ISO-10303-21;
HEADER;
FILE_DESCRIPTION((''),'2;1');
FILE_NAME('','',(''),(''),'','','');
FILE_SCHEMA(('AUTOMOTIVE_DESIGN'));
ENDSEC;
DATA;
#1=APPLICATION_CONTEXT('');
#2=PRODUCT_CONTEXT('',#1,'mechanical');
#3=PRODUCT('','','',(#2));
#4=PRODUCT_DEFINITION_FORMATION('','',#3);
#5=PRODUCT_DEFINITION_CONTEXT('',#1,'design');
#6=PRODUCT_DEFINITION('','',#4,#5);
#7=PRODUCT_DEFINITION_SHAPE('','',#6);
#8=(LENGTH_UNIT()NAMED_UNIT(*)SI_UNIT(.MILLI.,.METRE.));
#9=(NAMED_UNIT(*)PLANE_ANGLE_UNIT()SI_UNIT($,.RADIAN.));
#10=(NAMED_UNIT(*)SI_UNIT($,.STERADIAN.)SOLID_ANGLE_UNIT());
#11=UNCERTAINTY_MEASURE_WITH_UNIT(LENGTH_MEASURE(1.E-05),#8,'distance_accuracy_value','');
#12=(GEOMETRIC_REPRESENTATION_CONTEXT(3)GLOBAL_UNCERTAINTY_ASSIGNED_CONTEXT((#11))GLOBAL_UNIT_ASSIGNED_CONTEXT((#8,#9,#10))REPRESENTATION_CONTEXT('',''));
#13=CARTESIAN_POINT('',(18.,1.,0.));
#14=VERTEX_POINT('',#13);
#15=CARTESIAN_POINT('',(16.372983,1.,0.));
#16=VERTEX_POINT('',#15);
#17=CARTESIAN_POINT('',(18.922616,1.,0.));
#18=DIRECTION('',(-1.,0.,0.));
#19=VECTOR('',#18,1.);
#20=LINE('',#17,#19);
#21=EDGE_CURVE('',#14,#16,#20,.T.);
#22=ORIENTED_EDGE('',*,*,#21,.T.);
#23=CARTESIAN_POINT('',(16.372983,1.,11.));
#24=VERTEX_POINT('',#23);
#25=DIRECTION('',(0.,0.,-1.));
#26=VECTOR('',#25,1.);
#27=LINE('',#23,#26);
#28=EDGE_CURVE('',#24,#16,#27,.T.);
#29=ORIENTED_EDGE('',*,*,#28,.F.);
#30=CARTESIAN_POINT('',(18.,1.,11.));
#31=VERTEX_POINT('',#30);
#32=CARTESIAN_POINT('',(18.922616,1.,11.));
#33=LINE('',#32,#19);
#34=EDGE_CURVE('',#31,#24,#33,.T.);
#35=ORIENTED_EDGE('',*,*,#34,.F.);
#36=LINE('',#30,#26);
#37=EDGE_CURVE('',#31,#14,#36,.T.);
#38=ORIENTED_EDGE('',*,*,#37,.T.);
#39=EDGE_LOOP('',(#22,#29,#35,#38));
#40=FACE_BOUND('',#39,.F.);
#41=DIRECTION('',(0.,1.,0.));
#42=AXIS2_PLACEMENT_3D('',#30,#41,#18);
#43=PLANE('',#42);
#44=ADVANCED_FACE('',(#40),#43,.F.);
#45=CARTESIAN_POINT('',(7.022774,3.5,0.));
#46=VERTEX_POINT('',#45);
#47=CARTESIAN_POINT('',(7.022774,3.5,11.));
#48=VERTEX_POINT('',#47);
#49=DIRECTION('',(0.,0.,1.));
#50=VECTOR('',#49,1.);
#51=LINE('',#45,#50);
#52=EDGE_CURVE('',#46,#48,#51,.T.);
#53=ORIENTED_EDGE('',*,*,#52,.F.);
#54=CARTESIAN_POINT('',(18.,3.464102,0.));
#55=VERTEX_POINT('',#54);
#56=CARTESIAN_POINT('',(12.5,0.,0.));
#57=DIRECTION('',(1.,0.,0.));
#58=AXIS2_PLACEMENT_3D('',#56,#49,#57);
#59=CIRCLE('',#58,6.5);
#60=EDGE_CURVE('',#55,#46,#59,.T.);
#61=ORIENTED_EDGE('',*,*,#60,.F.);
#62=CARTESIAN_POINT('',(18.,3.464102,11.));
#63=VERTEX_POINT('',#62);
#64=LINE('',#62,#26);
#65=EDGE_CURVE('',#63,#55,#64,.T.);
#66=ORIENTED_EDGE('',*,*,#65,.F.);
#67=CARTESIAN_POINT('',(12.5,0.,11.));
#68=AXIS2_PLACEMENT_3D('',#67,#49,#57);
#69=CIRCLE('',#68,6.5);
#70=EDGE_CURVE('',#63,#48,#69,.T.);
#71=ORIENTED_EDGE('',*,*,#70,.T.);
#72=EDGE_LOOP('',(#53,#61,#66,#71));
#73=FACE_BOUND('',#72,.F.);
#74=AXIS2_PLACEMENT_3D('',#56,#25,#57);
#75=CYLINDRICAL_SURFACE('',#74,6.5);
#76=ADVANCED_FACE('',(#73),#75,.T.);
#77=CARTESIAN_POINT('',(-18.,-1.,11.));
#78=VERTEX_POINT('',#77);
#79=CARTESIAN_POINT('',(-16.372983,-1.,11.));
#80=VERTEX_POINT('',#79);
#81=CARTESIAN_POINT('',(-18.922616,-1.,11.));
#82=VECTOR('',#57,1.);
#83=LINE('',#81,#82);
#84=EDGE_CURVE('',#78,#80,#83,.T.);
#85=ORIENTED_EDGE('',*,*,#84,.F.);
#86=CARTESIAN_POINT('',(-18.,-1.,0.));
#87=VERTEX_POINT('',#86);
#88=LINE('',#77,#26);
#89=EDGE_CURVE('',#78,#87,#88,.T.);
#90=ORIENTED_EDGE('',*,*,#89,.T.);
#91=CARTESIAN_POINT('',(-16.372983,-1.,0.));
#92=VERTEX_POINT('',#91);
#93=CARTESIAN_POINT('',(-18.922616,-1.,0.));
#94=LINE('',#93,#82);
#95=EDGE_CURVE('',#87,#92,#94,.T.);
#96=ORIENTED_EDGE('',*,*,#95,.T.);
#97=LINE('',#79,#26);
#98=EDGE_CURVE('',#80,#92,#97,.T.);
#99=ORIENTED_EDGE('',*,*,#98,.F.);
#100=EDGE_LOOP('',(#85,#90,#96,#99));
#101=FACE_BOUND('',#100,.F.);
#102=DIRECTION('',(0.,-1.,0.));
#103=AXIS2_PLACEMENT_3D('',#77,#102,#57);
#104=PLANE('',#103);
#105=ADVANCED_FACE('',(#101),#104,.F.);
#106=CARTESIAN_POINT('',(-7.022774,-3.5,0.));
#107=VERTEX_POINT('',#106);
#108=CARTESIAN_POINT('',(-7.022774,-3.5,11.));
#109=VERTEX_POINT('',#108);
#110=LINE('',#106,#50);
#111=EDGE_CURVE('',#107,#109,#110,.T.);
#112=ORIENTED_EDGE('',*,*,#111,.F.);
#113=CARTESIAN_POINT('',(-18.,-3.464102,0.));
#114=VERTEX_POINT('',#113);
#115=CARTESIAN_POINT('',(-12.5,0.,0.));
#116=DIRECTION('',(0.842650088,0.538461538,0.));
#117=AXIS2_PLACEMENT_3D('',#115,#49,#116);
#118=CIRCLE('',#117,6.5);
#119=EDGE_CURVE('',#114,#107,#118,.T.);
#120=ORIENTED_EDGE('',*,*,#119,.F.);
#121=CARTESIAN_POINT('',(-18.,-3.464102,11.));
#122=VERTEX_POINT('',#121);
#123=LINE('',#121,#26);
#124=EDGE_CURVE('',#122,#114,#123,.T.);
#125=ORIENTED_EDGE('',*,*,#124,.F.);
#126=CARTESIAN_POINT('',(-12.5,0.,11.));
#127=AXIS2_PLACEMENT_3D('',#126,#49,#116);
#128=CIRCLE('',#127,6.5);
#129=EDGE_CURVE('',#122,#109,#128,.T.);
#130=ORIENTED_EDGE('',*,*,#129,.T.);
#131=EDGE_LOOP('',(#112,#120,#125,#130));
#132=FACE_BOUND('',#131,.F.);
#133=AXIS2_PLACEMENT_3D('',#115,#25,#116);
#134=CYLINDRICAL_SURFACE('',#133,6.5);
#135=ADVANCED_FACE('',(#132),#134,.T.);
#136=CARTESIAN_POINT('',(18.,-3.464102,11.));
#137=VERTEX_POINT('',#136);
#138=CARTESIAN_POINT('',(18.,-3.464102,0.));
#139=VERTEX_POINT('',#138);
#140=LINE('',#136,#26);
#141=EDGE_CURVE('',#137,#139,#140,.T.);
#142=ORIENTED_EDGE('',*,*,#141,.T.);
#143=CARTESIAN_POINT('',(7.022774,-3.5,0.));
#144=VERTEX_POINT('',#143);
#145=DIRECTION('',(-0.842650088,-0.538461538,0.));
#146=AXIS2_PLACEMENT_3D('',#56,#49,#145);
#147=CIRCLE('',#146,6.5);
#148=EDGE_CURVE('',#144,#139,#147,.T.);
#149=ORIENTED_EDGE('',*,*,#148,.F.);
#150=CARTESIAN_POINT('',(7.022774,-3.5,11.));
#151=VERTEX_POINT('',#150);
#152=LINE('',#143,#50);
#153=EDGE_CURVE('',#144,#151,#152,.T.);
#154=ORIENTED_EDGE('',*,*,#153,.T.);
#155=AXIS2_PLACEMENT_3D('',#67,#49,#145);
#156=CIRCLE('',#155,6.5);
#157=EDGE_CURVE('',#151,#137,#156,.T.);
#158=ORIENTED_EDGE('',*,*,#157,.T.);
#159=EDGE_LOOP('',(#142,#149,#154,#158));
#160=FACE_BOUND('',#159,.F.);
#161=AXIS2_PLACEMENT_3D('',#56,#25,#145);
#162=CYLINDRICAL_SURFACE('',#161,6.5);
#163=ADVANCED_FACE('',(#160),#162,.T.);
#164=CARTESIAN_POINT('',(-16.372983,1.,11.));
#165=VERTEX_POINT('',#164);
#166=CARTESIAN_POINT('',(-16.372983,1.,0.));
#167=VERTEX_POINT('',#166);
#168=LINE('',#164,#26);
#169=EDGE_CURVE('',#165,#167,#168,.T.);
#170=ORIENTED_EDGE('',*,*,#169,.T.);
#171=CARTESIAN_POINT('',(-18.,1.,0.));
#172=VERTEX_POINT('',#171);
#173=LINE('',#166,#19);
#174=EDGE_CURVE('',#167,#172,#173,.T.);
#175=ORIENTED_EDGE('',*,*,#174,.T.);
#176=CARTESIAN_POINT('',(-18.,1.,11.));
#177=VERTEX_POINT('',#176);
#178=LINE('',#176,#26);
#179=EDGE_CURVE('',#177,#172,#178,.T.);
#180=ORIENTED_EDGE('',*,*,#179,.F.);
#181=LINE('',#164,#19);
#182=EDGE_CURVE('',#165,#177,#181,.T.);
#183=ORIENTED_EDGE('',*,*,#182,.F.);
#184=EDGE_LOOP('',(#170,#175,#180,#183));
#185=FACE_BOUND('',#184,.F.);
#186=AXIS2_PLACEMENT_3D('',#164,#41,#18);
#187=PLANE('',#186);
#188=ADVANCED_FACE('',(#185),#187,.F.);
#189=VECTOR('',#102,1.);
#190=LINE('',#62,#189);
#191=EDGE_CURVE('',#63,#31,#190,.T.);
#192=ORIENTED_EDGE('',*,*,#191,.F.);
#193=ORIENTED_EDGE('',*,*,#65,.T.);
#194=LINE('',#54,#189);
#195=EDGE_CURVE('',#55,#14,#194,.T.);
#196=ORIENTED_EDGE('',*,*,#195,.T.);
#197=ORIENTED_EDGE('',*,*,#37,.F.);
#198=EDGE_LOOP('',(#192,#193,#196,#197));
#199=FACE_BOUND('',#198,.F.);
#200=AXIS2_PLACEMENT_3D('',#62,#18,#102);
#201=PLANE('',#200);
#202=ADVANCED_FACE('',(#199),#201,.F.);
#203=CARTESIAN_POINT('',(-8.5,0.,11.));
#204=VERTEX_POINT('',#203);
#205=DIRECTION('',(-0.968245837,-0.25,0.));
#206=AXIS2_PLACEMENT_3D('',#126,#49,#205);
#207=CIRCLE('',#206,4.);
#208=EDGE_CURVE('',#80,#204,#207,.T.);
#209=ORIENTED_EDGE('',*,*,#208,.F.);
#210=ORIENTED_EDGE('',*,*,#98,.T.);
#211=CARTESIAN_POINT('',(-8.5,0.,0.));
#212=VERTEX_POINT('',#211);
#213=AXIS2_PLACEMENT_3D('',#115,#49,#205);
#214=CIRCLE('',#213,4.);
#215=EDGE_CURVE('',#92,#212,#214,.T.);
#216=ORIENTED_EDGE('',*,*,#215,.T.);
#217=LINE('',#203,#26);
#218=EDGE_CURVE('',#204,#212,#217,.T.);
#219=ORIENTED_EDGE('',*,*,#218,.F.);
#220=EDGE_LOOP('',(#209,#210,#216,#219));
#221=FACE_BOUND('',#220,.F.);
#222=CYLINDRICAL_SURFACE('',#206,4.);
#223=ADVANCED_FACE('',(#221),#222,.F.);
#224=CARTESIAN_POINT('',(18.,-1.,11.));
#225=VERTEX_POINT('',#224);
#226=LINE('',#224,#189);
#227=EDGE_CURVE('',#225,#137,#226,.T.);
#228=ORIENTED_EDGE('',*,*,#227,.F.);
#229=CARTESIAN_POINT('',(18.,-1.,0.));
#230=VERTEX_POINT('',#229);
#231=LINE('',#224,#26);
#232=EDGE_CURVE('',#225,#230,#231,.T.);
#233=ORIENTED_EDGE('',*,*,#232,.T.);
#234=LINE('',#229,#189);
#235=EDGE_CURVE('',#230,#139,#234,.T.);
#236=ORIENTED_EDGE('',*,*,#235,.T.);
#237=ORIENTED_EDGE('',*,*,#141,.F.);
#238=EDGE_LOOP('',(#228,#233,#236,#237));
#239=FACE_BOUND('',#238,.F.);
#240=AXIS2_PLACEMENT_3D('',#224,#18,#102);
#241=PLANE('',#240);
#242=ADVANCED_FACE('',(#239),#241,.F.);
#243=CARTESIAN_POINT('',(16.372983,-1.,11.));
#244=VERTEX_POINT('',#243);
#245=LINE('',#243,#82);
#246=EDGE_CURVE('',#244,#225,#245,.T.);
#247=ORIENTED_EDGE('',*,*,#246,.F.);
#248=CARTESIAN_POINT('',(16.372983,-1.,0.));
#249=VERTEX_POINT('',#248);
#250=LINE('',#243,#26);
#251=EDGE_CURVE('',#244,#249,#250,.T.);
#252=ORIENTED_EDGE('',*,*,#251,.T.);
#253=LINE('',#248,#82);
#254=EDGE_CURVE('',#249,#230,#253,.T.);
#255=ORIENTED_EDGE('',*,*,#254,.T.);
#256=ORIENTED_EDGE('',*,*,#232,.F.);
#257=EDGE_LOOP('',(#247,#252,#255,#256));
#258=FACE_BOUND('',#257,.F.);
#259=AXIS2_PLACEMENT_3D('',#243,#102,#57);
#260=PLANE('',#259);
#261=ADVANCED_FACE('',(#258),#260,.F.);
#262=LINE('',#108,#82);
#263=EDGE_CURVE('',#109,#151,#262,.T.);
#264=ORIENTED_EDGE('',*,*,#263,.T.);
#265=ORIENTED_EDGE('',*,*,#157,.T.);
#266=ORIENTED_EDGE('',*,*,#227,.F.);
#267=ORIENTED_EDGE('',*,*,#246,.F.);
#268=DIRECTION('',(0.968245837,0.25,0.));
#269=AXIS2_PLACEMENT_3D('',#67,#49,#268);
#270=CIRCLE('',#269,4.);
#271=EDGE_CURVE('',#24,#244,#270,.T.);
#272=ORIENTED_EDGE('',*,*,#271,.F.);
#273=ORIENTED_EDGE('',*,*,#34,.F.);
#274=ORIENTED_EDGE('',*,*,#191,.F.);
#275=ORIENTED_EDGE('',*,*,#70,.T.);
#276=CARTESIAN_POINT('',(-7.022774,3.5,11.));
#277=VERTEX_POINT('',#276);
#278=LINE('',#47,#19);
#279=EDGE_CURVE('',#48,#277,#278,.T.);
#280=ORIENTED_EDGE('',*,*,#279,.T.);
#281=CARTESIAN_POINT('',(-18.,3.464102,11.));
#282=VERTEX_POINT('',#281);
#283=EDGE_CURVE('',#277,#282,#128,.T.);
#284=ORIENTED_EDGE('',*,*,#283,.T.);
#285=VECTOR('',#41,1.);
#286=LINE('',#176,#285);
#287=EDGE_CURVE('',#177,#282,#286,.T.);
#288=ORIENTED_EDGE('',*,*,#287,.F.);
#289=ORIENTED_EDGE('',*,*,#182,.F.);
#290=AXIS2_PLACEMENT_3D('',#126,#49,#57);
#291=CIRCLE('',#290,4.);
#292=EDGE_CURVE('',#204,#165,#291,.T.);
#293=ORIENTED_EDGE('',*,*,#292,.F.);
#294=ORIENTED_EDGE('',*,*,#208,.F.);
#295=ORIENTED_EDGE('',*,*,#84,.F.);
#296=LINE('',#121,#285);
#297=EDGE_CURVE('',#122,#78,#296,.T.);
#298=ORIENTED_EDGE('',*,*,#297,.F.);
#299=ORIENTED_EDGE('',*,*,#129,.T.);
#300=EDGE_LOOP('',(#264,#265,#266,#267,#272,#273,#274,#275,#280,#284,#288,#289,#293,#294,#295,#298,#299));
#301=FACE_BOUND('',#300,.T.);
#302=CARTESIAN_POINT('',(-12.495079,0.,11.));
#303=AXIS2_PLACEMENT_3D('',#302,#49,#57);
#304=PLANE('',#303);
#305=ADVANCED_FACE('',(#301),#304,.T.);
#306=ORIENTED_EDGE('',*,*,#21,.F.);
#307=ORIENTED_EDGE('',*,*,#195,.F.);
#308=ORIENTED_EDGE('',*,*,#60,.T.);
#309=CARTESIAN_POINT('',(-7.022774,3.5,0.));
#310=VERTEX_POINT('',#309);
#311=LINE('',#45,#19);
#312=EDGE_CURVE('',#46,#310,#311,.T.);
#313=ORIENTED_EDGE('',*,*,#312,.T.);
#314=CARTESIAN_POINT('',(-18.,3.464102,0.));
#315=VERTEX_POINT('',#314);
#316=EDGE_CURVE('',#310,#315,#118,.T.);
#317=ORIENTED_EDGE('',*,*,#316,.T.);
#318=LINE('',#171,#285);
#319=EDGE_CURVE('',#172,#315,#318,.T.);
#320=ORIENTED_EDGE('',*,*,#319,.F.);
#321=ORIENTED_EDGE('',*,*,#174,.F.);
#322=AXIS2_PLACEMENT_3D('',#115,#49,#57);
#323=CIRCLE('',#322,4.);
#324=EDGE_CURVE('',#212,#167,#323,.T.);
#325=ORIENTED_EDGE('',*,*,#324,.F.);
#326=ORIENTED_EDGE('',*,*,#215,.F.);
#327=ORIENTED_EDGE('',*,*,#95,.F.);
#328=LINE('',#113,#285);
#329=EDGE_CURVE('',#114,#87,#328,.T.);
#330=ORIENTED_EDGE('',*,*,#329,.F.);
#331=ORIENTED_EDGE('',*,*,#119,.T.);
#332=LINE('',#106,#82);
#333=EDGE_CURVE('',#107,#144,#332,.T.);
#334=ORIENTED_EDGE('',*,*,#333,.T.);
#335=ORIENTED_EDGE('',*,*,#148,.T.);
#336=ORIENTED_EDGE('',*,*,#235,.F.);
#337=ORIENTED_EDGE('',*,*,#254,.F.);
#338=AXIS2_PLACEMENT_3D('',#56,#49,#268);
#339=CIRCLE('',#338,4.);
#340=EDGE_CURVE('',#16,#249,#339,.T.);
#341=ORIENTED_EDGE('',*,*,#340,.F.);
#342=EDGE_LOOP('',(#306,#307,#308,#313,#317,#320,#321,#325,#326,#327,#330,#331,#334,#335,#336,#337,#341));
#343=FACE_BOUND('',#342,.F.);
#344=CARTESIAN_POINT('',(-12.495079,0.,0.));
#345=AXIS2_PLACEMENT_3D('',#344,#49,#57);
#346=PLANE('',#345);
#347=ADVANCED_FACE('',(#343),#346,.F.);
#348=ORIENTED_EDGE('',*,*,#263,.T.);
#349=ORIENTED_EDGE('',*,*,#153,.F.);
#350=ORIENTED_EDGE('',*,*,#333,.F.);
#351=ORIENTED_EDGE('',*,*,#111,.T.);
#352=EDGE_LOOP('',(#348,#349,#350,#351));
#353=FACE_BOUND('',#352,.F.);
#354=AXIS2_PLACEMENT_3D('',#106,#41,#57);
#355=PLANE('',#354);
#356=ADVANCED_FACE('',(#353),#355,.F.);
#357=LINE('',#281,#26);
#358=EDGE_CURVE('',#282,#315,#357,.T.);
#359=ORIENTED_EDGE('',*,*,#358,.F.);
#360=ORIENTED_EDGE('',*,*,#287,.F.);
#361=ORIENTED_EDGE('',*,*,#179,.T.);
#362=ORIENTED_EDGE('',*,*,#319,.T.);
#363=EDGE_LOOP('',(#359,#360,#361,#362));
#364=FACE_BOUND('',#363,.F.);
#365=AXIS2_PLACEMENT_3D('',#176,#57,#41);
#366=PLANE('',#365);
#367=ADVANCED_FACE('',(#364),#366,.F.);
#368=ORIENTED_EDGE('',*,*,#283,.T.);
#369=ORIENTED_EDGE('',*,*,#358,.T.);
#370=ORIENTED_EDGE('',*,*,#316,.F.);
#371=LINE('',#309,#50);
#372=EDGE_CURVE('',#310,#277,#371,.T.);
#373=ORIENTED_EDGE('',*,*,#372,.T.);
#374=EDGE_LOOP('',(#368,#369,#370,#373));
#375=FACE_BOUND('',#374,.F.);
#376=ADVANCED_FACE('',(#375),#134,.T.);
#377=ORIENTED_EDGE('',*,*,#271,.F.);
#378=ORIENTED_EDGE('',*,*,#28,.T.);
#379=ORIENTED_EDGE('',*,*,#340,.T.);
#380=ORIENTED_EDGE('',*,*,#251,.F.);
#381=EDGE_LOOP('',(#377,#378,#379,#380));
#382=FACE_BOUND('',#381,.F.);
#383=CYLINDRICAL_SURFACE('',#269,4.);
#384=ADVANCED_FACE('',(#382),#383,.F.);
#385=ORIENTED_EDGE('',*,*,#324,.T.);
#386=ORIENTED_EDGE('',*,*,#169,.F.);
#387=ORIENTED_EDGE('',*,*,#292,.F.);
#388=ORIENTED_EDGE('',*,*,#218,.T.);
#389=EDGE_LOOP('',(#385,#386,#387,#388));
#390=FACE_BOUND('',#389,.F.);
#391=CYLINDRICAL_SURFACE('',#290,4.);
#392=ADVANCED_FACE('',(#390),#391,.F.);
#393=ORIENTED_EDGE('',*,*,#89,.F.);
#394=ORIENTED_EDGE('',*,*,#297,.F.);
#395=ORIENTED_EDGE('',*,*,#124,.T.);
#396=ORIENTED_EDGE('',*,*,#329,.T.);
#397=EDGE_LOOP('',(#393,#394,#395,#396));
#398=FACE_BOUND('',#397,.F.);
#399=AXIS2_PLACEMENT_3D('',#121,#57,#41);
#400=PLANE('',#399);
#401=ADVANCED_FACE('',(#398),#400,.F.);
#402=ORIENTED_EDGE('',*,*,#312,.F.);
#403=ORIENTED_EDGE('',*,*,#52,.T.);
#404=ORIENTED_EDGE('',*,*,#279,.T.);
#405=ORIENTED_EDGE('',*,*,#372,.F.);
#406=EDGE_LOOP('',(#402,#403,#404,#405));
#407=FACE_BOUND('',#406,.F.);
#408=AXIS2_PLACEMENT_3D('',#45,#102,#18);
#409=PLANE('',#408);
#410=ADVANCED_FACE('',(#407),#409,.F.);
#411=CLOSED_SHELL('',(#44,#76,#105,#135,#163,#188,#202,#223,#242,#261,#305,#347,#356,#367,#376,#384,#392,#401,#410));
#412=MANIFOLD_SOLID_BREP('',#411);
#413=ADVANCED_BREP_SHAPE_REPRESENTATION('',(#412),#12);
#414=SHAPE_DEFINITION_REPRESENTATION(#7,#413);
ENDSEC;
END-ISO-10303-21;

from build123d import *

# Parameters (mm, degrees)
F1_DEPTH = 11
F3_DEPTH = 11


with BuildPart() as f1:
    # F0 (on Top) → F1 (new body)
    with BuildSketch(Plane.XY):
        with BuildLine():
            Line((-12.5, 3.5), (-7.0227744249, 3.5))
            ThreePointArc((-7.0227744249, 3.5), (-19, 0), (-7.0227744249, -3.5))
            Line((-7.0227744249, -3.5), (-12.5, -3.5))
            Line((-12.5, -3.5), (-12.5, 3.5))
        make_face()
        with BuildLine():
            ThreePointArc((7.0227744249, -3.5), (6, 0), (7.0227744249, 3.5))
            Line((7.0227744249, 3.5), (-7.0227744249, 3.5))
            ThreePointArc((-7.0227744249, 3.5), (-6.2609309093, 1.8231886576), (-6, 0))
            ThreePointArc((-6, 0), (-6.2609309093, -1.8231886576), (-7.0227744249, -3.5))
            Line((-7.0227744249, -3.5), (7.0227744249, -3.5))
        make_face()
        with BuildLine():
            Line((7.0227744249, 3.5), (12.5, 3.5))
            Line((12.5, 3.5), (12.5, -3.5))
            Line((12.5, -3.5), (7.0227744249, -3.5))
            ThreePointArc((7.0227744249, -3.5), (14.3231886576, -6.2390690907), (19, 0))
            ThreePointArc((19, 0), (14.3231886576, 6.2390690907), (7.0227744249, 3.5))
        make_face()
        with BuildLine():
            ThreePointArc((-6, 0), (-6.2609309093, 1.8231886576), (-7.0227744249, 3.5))
            Line((-7.0227744249, 3.5), (-12.5, 3.5))
            Line((-12.5, 3.5), (-12.5, -3.5))
            Line((-12.5, -3.5), (-7.0227744249, -3.5))
            ThreePointArc((-7.0227744249, -3.5), (-6.2609309093, -1.8231886576), (-6, 0))
        make_face()
        with BuildLine():
            Line((12.5, -3.5), (12.5, 3.5))
            Line((12.5, 3.5), (7.0227744249, 3.5))
            ThreePointArc((7.0227744249, 3.5), (6, 0), (7.0227744249, -3.5))
            Line((7.0227744249, -3.5), (12.5, -3.5))
        make_face()
    extrude(amount=F1_DEPTH)

    # F2 (on face) → F3 (cut, through all)
    with BuildSketch(Plane.XY.offset(11)):
        with BuildLine():
            ThreePointArc((-16.3729833462, -1), (-16.5, 0), (-16.3729833462, 1))
            Line((-16.3729833462, 1), (-18, 1))
            Line((-18, 1), (-18, -1))
            Line((-18, -1), (-16.3729833462, -1))
        make_face()
        with BuildLine():
            ThreePointArc((-16.3729833462, -1), (-11.9959828301, -3.9681187851), (-8.5, 0))
            ThreePointArc((-8.5, 0), (-11.9959828301, 3.9681187851), (-16.3729833462, 1))
            Line((-16.3729833462, 1), (-16, 1))
            Line((-16, 1), (-16, -1))
            Line((-16, -1), (-16.3729833462, -1))
        make_face()
        with BuildLine():
            Line((-16, 1), (-16.3729833462, 1))
            ThreePointArc((-16.3729833462, 1), (-16.5, 0), (-16.3729833462, -1))
            Line((-16.3729833462, -1), (-16, -1))
            Line((-16, -1), (-16, 1))
        make_face()
        with BuildLine():
            ThreePointArc((16.5, 0), (16.4681187851, 0.5040171699), (16.3729833462, 1))
            Line((16.3729833462, 1), (16, 1))
            Line((16, 1), (16, -1))
            Line((16, -1), (16.3729833462, -1))
            ThreePointArc((16.3729833462, -1), (16.4681187851, -0.5040171699), (16.5, 0))
        make_face()
        with BuildLine():
            Line((18, -1), (18, 1))
            Line((18, 1), (16.3729833462, 1))
            ThreePointArc((16.3729833462, 1), (16.4681187851, 0.5040171699), (16.5, 0))
            ThreePointArc((16.5, 0), (16.4681187851, -0.5040171699), (16.3729833462, -1))
            Line((16.3729833462, -1), (18, -1))
        make_face()
        with BuildLine():
            Line((16, 1), (16.3729833462, 1))
            ThreePointArc((16.3729833462, 1), (8.5, 0), (16.3729833462, -1))
            Line((16.3729833462, -1), (16, -1))
            Line((16, -1), (16, 1))
        make_face()
        with BuildLine():
            Line((-18, -1), (-18, 1))
            Line((-18, 1), (-18.9226162893, 1))
            ThreePointArc((-18.9226162893, 1), (-19, 0), (-18.9226162893, -1))
            Line((-18.9226162893, -1), (-18, -1))
        make_face()
        with BuildLine():
            Line((18.9226162893, 1), (18, 1))
            Line((18, 1), (18, -1))
            Line((18, -1), (18.9226162893, -1))
            ThreePointArc((18.9226162893, -1), (19, 0), (18.9226162893, 1))
        make_face()
        with BuildLine():
            ThreePointArc((18.9226162893, 1), (18.5872936506, 2.2792226771), (18, 3.4641016151))
            Line((18, 3.4641016151), (18, 1))
            Line((18, 1), (18.9226162893, 1))
        make_face()
        with BuildLine():
            Line((18, -1), (18, -3.4641016151))
            ThreePointArc((18, -3.4641016151), (18.5872936506, -2.2792226771), (18.9226162893, -1))
            Line((18.9226162893, -1), (18, -1))
        make_face()
        with BuildLine():
            Line((-18.9226162893, 1), (-18, 1))
            Line((-18, 1), (-18, 3.4641016151))
            ThreePointArc((-18, 3.4641016151), (-18.5872936506, 2.2792226771), (-18.9226162893, 1))
        make_face()
        with BuildLine():
            Line((-18, -3.4641016151), (-18, -1))
            Line((-18, -1), (-18.9226162893, -1))
            ThreePointArc((-18.9226162893, -1), (-18.5872936506, -2.2792226771), (-18, -3.4641016151))
        make_face()
    extrude(amount=-F3_DEPTH, mode=Mode.SUBTRACT)


solid = f1.part
